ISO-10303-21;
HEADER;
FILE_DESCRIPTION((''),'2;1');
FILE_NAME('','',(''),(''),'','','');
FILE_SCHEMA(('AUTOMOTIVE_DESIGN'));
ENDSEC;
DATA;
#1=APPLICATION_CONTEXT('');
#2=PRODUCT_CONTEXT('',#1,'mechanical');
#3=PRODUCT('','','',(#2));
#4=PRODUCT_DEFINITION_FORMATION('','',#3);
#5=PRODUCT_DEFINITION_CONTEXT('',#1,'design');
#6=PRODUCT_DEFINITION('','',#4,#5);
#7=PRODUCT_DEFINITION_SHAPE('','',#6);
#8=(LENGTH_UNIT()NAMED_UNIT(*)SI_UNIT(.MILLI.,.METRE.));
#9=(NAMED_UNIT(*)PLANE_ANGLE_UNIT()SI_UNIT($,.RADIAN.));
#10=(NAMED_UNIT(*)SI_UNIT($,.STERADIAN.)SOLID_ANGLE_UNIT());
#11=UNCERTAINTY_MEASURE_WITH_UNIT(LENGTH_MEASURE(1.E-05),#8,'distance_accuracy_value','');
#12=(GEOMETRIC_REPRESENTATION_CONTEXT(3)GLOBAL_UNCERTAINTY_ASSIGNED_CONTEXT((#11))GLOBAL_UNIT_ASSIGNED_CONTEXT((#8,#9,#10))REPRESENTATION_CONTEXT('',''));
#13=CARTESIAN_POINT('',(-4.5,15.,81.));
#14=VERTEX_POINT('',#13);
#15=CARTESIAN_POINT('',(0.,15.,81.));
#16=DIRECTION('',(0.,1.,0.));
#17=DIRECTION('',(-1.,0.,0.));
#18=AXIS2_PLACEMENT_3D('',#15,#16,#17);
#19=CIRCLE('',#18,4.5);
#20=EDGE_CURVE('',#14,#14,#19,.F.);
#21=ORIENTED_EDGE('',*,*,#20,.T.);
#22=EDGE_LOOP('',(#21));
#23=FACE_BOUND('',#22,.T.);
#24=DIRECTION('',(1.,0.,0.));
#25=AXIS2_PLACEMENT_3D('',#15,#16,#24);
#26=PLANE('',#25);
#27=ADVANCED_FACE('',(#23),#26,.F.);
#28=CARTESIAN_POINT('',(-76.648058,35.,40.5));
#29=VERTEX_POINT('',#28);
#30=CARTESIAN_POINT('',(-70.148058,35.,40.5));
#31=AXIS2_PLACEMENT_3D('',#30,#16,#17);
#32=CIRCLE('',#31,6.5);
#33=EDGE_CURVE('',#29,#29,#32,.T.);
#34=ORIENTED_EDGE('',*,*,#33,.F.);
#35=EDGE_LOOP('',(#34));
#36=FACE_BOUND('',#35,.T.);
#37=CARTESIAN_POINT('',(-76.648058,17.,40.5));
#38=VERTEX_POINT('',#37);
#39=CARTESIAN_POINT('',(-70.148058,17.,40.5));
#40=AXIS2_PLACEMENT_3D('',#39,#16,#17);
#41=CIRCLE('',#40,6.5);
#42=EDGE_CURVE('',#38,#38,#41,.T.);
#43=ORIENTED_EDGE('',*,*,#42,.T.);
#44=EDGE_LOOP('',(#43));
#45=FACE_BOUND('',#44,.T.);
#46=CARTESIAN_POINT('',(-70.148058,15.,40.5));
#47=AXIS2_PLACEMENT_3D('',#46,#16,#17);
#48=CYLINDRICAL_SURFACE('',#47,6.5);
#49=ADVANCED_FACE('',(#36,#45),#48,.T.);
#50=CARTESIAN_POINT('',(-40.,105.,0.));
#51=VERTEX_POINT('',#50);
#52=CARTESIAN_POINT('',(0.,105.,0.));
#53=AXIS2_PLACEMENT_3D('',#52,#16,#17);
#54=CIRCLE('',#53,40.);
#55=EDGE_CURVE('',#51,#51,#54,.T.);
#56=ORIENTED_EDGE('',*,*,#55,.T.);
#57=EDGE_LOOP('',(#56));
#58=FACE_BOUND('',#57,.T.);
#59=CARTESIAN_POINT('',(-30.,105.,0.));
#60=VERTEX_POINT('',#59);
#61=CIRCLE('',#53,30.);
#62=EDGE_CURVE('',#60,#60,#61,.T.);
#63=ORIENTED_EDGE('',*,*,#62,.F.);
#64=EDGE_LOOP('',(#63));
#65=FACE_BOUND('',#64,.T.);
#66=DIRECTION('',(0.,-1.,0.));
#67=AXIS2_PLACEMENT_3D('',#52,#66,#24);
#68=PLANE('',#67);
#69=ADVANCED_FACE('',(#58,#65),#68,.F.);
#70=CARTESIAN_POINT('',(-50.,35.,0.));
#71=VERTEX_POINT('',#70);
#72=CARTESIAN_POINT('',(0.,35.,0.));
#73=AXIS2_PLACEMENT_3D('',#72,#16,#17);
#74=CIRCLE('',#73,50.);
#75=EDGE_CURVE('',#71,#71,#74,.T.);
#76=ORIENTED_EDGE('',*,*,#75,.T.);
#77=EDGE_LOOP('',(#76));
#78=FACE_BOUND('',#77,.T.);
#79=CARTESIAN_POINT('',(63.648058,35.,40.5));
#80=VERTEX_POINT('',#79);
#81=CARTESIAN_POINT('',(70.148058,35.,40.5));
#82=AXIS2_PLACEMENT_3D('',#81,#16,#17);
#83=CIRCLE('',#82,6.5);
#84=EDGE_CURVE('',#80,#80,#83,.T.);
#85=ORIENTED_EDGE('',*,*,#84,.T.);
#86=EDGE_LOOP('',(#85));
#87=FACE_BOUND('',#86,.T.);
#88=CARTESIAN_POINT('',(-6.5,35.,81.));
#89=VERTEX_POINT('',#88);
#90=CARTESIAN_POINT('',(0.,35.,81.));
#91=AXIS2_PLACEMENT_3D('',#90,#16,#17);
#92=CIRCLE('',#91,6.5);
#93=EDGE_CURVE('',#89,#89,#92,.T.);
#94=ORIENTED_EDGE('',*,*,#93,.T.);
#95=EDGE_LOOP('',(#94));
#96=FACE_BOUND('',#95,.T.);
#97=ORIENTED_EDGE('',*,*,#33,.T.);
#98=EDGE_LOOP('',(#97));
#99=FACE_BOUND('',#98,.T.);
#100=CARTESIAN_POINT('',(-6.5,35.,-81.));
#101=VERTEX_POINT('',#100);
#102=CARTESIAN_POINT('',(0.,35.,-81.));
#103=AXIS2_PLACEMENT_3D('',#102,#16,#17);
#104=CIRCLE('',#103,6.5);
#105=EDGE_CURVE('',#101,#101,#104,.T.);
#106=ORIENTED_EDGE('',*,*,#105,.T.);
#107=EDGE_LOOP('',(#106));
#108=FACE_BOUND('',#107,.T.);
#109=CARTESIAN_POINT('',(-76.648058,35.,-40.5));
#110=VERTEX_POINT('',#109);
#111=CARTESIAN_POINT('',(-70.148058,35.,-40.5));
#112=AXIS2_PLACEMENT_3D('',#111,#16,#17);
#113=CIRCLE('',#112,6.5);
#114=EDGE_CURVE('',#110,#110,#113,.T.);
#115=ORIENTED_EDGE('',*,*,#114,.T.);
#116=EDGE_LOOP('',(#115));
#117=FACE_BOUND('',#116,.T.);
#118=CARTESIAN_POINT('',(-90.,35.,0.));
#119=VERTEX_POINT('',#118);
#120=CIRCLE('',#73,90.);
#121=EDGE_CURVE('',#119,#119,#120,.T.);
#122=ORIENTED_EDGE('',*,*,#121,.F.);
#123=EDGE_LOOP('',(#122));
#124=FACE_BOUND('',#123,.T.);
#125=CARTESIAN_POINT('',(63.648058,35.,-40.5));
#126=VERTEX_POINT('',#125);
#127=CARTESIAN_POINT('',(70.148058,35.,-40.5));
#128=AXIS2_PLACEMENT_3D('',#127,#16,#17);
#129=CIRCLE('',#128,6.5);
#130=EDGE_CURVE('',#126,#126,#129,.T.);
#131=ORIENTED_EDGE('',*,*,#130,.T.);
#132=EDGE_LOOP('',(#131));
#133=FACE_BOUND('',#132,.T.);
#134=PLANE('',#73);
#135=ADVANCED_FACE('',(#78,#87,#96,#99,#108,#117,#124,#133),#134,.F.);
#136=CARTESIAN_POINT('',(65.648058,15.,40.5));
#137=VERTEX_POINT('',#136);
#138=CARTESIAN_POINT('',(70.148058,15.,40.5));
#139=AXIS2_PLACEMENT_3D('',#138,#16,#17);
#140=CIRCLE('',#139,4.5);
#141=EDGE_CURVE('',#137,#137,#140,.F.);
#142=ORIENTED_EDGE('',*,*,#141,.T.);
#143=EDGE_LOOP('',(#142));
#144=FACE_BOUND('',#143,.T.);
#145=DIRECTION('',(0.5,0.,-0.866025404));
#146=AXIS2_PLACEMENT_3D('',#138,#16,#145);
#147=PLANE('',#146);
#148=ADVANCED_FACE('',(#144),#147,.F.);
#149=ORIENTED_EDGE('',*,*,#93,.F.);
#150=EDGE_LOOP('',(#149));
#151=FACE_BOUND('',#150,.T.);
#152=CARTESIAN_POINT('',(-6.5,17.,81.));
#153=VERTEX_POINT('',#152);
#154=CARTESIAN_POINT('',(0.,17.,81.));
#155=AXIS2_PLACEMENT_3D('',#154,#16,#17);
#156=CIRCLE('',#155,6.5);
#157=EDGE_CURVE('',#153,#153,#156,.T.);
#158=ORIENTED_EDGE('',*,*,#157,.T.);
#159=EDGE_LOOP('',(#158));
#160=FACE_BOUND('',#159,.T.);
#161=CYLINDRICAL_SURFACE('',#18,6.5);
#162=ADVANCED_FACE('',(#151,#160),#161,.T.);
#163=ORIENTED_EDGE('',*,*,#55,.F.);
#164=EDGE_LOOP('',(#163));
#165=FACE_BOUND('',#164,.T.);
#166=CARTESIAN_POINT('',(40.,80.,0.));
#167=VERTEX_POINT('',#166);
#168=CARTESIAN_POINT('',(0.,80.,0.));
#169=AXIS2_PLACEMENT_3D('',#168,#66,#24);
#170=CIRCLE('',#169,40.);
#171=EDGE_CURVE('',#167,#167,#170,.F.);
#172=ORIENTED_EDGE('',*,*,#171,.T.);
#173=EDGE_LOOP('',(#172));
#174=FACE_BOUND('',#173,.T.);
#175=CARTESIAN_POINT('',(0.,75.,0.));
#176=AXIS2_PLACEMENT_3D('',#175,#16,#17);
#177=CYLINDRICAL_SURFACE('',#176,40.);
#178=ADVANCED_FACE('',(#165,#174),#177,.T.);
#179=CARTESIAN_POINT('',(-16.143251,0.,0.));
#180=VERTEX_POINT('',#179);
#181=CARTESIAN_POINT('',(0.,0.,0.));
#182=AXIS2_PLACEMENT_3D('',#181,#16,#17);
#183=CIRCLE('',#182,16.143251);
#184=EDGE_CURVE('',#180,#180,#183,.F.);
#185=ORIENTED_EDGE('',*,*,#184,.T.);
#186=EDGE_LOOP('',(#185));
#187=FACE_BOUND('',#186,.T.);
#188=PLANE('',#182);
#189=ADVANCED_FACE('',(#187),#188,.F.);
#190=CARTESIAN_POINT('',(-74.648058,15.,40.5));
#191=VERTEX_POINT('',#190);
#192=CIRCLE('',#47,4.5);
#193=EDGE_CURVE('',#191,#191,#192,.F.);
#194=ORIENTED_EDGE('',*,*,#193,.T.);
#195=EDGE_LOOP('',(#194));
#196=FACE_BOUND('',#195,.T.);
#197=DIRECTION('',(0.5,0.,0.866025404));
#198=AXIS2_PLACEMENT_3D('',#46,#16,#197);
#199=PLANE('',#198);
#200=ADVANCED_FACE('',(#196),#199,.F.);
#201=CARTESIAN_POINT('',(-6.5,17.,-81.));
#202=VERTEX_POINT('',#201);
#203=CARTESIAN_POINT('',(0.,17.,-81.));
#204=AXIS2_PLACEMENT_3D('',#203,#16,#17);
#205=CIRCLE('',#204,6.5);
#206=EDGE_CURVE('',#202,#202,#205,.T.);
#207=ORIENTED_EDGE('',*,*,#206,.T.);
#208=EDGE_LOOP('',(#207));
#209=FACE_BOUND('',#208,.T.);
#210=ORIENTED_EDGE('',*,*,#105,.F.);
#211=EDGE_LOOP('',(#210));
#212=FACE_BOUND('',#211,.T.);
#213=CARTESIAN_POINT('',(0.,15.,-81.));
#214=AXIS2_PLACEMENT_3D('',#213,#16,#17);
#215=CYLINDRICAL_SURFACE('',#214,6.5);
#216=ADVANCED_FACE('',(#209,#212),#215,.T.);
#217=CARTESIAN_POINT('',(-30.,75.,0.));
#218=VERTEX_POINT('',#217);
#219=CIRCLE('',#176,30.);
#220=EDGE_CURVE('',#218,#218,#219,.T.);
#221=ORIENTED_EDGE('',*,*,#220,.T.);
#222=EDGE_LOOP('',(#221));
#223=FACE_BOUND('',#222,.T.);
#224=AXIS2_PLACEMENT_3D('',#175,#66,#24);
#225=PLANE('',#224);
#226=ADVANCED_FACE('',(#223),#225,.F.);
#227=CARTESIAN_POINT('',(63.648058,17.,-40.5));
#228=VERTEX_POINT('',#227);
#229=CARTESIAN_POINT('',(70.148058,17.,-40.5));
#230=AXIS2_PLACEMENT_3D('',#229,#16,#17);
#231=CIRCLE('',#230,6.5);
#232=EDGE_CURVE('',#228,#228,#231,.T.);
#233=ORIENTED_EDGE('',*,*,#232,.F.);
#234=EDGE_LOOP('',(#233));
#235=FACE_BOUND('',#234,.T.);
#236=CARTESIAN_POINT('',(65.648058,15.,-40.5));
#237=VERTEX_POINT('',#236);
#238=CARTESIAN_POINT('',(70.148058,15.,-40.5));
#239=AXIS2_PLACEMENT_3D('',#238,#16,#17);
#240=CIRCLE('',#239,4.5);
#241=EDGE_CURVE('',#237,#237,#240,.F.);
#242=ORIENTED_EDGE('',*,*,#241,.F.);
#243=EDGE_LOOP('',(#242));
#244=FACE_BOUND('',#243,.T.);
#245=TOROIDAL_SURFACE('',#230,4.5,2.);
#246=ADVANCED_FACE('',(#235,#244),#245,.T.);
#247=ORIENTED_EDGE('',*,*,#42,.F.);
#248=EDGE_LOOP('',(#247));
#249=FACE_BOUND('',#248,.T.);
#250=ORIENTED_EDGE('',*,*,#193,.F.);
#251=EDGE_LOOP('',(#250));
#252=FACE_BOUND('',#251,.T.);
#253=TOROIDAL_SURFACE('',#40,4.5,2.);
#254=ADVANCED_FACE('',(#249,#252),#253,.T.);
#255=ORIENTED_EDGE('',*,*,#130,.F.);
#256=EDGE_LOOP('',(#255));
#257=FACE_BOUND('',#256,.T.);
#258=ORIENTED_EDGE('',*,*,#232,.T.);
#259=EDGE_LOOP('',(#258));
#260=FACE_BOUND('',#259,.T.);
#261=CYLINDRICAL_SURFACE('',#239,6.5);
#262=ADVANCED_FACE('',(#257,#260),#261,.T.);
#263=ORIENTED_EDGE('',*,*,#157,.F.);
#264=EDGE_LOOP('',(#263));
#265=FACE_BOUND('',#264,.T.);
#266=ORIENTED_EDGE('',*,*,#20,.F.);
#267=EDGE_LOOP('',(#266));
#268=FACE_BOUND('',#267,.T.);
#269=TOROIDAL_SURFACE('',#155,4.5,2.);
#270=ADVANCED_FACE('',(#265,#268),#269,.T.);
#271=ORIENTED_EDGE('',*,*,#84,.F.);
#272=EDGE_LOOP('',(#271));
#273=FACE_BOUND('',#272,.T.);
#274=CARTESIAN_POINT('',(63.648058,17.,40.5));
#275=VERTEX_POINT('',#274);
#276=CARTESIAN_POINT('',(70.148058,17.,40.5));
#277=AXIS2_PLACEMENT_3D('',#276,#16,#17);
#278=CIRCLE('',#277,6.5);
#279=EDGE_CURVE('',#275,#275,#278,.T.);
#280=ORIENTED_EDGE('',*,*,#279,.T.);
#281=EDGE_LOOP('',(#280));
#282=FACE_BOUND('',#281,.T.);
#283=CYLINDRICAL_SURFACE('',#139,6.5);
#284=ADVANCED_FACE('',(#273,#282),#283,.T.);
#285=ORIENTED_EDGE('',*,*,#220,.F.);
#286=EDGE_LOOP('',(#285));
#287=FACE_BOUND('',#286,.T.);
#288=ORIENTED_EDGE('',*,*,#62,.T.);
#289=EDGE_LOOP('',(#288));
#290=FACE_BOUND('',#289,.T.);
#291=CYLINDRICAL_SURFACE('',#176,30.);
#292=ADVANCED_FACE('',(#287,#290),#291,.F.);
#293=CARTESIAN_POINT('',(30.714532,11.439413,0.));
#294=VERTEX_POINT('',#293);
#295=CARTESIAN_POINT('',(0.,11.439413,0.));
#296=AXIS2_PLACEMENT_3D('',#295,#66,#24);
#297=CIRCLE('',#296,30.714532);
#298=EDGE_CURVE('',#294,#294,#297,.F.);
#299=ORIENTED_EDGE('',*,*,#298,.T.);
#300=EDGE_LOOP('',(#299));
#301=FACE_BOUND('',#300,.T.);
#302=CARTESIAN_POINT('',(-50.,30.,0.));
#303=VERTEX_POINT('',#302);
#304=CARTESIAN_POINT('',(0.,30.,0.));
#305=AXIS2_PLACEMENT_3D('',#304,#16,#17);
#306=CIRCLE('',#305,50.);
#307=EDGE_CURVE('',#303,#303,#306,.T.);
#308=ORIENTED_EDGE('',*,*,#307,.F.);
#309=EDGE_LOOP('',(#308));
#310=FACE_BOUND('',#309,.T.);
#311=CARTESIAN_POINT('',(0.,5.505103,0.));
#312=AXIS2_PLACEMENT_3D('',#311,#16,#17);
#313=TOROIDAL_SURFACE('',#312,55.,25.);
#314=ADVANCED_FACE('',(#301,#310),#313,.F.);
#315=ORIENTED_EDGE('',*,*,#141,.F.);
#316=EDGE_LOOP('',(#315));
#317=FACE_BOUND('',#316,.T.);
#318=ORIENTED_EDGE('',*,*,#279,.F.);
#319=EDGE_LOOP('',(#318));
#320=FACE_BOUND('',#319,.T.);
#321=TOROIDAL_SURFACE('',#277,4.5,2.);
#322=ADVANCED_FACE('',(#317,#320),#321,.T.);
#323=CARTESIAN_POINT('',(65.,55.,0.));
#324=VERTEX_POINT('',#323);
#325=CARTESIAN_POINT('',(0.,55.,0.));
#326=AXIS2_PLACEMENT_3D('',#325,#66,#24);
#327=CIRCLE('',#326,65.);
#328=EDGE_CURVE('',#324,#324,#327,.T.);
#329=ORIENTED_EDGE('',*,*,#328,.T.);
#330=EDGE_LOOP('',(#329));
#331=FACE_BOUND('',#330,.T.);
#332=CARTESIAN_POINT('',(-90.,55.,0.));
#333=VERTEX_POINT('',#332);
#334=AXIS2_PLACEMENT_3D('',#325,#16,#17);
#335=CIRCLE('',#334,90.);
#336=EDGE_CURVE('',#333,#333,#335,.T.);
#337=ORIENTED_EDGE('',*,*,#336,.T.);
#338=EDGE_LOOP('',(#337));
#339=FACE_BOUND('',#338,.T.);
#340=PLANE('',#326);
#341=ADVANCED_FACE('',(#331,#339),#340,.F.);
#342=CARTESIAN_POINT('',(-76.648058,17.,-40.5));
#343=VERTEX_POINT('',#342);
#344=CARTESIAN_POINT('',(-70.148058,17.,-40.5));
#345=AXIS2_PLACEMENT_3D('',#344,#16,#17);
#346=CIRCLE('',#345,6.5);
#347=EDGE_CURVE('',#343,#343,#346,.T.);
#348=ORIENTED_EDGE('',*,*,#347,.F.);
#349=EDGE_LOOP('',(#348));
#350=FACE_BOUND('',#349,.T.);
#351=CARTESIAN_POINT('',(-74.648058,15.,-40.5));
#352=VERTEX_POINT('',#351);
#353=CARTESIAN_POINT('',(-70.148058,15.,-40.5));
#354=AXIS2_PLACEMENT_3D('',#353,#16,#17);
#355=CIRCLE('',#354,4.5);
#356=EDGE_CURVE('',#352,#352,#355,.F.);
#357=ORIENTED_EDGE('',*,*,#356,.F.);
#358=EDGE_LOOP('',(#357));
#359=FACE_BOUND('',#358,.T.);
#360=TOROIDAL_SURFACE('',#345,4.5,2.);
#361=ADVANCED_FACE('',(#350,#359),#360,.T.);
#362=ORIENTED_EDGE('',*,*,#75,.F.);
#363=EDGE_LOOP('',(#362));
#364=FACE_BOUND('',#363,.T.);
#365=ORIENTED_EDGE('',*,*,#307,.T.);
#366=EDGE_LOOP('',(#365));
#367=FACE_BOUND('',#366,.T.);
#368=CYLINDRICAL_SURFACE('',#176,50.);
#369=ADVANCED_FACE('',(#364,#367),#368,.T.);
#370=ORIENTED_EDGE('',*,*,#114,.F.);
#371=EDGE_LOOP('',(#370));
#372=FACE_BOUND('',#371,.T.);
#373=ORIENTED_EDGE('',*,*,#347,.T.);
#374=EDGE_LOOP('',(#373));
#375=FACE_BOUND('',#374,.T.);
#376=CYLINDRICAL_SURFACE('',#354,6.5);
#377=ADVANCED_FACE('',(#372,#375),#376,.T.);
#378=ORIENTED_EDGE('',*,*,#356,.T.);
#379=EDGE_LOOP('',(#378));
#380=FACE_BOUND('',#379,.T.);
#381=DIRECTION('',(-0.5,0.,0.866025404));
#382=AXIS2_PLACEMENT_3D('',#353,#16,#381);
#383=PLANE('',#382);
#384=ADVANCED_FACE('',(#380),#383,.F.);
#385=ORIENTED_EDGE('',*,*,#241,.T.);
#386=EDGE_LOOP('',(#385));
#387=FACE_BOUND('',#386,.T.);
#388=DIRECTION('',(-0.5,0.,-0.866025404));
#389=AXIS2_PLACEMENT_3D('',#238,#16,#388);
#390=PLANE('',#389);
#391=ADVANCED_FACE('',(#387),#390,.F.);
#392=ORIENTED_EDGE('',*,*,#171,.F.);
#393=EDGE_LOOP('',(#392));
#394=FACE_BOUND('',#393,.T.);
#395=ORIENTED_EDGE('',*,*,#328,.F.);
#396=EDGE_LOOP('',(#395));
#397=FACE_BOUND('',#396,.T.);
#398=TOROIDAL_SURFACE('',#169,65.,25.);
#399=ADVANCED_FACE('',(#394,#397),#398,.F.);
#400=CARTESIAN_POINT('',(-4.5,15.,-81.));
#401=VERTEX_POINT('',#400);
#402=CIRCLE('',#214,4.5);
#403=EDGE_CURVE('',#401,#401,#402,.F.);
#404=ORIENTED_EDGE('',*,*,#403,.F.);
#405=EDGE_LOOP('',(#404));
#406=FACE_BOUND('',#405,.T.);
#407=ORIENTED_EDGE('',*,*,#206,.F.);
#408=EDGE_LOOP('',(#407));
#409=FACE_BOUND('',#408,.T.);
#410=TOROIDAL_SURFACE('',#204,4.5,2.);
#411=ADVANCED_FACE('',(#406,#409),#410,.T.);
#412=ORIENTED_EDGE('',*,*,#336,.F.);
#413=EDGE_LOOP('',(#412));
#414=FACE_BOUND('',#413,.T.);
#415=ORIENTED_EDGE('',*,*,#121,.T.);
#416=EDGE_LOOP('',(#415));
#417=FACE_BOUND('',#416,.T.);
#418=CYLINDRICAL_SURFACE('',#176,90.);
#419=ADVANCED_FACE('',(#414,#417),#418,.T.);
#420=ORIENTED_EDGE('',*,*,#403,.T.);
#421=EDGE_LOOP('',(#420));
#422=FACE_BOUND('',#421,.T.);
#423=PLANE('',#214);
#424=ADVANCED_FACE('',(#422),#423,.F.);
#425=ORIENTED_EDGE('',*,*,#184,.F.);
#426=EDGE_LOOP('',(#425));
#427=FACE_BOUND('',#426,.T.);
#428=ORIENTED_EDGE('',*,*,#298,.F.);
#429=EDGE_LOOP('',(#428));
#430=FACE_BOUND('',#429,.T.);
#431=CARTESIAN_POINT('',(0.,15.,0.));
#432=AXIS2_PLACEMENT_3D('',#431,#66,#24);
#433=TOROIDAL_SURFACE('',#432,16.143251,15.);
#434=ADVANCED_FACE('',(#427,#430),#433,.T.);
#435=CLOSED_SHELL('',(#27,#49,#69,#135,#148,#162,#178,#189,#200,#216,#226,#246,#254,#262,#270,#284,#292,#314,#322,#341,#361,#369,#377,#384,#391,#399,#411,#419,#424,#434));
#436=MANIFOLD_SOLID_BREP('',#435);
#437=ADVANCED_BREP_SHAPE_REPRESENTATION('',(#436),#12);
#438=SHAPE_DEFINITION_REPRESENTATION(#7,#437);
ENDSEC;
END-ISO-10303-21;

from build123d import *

# Parameters (mm, degrees)
SKETCH2_R           = 6.5000000000000036
BOSS_EXTRUDE1_DEPTH = 40
CIRPATTERN1_COUNT   = 6
FILLET1_R           = 25
FILLET2_R           = 15
FILLET5_R           = 2


with BuildPart() as part:
    # Sketch1 → Revolve1 (revolve)
    with BuildSketch(Plane.XY):
        Polygon((5e-16, 75), (0, 0), (-30, 0), (-30, 29.999999999999996), (-50.00000000000002, 29.999999999999993), (-50.00000000000002, 35), (-90.00000000000003, 34.99999999999999), (-90.00000000000003, 54.99999999999999), (-40.000000000000014, 54.99999999999999), (-40, 105), (-30.000000000000004, 105), (-30, 75), align=None)
    revolve(axis=Axis((5e-16, 75, 0), (-1e-17, -1, 0)))

    # Sketch2 → Boss-Extrude1 (add)
    with BuildSketch(Plane(origin=(3.7e-16, 54.99999999999999, 0), x_dir=(1, -1e-17, 0), z_dir=(1e-17, 1, 0))):
        with Locations(Location((0, 81, 0), (0, 0, 180))):
            Circle(SKETCH2_R)
    boss_extrude1 = extrude(amount=-BOSS_EXTRUDE1_DEPTH)

    # CirPattern1: Boss-Extrude1 ×6 about axis
    cirpattern1_axis = Axis((-9.547e-14, 0, 1.87e-15), (0, 1, 0))
    for i in range(1, CIRPATTERN1_COUNT):
        add(boss_extrude1.rotate(cirpattern1_axis, i * 360 / CIRPATTERN1_COUNT))

    # Fillet1
    # the kernel refuses this fillet: 25 mm, written as the material it adds along each edge
    with BuildSketch(Plane(origin=(2e-16, 30, 0), x_dir=(-1, 0, 0), z_dir=(0, 0, 1))) as fillet1_piece_1:
        with BuildLine():
            CenterArc((55, 24.494897427831788), FILLET1_R, 180, 78.46304096718455)
            Line((50.00000000000002, 3.55e-15), (49.90000000000002, -0.4898979485566315))
            ThreePointArc((49.90000000000002, -0.4898979485566315), (40.000000000000014, -0.5), (30, -0.5))
            Line((30, -0.5), (29.5, 0))
            Line((29.5, 0), (29.5, 24.494897427831788))
            Line((29.5, 24.494897427831788), (30, 24.494897427831788))
        make_face()
    revolve(axis=Axis((2e-16, 30, 0), (-1e-17, -1, 0)))
    with BuildSketch(Plane(origin=(3.7e-16, 54.99999999999999, 0), x_dir=(-1, 0, 0), z_dir=(0, 0, 1))) as fillet1_piece_2:
        with BuildLine():
            CenterArc((40.000000000000014 + FILLET1_R, -FILLET1_R), FILLET1_R, 90, 89.99999999999997)
            Line((40.000000000000014, -FILLET1_R), (40.000000000000014 - FILLET1_R * 0.02, -FILLET1_R))
            Line((40.000000000000014 - FILLET1_R * 0.02, -FILLET1_R), (40.000000000000014 - FILLET1_R * 0.02, FILLET1_R * 0.02))
            Line((40.000000000000014 - FILLET1_R * 0.02, FILLET1_R * 0.02), (40.000000000000014 + FILLET1_R, FILLET1_R * 0.02))
            Line((40.000000000000014 + FILLET1_R, FILLET1_R * 0.02), (40.000000000000014 + FILLET1_R, -7.11e-15))
        make_face()
    revolve(axis=Axis((3.7e-16, 54.99999999999999, 0), (-1e-17, -1, 0)))

    # Fillet2
    fillet2_edges = [part.edges().sort_by_distance(p)[0] for p in [
        (30, -2e-16, -1.7e-14),
    ]]
    fillet(fillet2_edges, radius=FILLET2_R)

    # Fillet5
    fillet5_edges = [part.edges().sort_by_distance(p)[0] for p in [
        (6.5000000000000036, 14.999999999999993, -81),
        (-66.89805770653957, 14.999999999999993, -46.12916512459895),
        (-73.39805770653969, 14.999999999999993, 34.870834875401044),
        (-6.500000000000204, 14.999999999999993, 81),
        (66.89805770653936, 14.999999999999993, 46.12916512459897),
        (73.39805770653949, 14.999999999999993, -34.870834875401066),
    ]]
    fillet(fillet5_edges, radius=FILLET5_R)


solid = part.part
